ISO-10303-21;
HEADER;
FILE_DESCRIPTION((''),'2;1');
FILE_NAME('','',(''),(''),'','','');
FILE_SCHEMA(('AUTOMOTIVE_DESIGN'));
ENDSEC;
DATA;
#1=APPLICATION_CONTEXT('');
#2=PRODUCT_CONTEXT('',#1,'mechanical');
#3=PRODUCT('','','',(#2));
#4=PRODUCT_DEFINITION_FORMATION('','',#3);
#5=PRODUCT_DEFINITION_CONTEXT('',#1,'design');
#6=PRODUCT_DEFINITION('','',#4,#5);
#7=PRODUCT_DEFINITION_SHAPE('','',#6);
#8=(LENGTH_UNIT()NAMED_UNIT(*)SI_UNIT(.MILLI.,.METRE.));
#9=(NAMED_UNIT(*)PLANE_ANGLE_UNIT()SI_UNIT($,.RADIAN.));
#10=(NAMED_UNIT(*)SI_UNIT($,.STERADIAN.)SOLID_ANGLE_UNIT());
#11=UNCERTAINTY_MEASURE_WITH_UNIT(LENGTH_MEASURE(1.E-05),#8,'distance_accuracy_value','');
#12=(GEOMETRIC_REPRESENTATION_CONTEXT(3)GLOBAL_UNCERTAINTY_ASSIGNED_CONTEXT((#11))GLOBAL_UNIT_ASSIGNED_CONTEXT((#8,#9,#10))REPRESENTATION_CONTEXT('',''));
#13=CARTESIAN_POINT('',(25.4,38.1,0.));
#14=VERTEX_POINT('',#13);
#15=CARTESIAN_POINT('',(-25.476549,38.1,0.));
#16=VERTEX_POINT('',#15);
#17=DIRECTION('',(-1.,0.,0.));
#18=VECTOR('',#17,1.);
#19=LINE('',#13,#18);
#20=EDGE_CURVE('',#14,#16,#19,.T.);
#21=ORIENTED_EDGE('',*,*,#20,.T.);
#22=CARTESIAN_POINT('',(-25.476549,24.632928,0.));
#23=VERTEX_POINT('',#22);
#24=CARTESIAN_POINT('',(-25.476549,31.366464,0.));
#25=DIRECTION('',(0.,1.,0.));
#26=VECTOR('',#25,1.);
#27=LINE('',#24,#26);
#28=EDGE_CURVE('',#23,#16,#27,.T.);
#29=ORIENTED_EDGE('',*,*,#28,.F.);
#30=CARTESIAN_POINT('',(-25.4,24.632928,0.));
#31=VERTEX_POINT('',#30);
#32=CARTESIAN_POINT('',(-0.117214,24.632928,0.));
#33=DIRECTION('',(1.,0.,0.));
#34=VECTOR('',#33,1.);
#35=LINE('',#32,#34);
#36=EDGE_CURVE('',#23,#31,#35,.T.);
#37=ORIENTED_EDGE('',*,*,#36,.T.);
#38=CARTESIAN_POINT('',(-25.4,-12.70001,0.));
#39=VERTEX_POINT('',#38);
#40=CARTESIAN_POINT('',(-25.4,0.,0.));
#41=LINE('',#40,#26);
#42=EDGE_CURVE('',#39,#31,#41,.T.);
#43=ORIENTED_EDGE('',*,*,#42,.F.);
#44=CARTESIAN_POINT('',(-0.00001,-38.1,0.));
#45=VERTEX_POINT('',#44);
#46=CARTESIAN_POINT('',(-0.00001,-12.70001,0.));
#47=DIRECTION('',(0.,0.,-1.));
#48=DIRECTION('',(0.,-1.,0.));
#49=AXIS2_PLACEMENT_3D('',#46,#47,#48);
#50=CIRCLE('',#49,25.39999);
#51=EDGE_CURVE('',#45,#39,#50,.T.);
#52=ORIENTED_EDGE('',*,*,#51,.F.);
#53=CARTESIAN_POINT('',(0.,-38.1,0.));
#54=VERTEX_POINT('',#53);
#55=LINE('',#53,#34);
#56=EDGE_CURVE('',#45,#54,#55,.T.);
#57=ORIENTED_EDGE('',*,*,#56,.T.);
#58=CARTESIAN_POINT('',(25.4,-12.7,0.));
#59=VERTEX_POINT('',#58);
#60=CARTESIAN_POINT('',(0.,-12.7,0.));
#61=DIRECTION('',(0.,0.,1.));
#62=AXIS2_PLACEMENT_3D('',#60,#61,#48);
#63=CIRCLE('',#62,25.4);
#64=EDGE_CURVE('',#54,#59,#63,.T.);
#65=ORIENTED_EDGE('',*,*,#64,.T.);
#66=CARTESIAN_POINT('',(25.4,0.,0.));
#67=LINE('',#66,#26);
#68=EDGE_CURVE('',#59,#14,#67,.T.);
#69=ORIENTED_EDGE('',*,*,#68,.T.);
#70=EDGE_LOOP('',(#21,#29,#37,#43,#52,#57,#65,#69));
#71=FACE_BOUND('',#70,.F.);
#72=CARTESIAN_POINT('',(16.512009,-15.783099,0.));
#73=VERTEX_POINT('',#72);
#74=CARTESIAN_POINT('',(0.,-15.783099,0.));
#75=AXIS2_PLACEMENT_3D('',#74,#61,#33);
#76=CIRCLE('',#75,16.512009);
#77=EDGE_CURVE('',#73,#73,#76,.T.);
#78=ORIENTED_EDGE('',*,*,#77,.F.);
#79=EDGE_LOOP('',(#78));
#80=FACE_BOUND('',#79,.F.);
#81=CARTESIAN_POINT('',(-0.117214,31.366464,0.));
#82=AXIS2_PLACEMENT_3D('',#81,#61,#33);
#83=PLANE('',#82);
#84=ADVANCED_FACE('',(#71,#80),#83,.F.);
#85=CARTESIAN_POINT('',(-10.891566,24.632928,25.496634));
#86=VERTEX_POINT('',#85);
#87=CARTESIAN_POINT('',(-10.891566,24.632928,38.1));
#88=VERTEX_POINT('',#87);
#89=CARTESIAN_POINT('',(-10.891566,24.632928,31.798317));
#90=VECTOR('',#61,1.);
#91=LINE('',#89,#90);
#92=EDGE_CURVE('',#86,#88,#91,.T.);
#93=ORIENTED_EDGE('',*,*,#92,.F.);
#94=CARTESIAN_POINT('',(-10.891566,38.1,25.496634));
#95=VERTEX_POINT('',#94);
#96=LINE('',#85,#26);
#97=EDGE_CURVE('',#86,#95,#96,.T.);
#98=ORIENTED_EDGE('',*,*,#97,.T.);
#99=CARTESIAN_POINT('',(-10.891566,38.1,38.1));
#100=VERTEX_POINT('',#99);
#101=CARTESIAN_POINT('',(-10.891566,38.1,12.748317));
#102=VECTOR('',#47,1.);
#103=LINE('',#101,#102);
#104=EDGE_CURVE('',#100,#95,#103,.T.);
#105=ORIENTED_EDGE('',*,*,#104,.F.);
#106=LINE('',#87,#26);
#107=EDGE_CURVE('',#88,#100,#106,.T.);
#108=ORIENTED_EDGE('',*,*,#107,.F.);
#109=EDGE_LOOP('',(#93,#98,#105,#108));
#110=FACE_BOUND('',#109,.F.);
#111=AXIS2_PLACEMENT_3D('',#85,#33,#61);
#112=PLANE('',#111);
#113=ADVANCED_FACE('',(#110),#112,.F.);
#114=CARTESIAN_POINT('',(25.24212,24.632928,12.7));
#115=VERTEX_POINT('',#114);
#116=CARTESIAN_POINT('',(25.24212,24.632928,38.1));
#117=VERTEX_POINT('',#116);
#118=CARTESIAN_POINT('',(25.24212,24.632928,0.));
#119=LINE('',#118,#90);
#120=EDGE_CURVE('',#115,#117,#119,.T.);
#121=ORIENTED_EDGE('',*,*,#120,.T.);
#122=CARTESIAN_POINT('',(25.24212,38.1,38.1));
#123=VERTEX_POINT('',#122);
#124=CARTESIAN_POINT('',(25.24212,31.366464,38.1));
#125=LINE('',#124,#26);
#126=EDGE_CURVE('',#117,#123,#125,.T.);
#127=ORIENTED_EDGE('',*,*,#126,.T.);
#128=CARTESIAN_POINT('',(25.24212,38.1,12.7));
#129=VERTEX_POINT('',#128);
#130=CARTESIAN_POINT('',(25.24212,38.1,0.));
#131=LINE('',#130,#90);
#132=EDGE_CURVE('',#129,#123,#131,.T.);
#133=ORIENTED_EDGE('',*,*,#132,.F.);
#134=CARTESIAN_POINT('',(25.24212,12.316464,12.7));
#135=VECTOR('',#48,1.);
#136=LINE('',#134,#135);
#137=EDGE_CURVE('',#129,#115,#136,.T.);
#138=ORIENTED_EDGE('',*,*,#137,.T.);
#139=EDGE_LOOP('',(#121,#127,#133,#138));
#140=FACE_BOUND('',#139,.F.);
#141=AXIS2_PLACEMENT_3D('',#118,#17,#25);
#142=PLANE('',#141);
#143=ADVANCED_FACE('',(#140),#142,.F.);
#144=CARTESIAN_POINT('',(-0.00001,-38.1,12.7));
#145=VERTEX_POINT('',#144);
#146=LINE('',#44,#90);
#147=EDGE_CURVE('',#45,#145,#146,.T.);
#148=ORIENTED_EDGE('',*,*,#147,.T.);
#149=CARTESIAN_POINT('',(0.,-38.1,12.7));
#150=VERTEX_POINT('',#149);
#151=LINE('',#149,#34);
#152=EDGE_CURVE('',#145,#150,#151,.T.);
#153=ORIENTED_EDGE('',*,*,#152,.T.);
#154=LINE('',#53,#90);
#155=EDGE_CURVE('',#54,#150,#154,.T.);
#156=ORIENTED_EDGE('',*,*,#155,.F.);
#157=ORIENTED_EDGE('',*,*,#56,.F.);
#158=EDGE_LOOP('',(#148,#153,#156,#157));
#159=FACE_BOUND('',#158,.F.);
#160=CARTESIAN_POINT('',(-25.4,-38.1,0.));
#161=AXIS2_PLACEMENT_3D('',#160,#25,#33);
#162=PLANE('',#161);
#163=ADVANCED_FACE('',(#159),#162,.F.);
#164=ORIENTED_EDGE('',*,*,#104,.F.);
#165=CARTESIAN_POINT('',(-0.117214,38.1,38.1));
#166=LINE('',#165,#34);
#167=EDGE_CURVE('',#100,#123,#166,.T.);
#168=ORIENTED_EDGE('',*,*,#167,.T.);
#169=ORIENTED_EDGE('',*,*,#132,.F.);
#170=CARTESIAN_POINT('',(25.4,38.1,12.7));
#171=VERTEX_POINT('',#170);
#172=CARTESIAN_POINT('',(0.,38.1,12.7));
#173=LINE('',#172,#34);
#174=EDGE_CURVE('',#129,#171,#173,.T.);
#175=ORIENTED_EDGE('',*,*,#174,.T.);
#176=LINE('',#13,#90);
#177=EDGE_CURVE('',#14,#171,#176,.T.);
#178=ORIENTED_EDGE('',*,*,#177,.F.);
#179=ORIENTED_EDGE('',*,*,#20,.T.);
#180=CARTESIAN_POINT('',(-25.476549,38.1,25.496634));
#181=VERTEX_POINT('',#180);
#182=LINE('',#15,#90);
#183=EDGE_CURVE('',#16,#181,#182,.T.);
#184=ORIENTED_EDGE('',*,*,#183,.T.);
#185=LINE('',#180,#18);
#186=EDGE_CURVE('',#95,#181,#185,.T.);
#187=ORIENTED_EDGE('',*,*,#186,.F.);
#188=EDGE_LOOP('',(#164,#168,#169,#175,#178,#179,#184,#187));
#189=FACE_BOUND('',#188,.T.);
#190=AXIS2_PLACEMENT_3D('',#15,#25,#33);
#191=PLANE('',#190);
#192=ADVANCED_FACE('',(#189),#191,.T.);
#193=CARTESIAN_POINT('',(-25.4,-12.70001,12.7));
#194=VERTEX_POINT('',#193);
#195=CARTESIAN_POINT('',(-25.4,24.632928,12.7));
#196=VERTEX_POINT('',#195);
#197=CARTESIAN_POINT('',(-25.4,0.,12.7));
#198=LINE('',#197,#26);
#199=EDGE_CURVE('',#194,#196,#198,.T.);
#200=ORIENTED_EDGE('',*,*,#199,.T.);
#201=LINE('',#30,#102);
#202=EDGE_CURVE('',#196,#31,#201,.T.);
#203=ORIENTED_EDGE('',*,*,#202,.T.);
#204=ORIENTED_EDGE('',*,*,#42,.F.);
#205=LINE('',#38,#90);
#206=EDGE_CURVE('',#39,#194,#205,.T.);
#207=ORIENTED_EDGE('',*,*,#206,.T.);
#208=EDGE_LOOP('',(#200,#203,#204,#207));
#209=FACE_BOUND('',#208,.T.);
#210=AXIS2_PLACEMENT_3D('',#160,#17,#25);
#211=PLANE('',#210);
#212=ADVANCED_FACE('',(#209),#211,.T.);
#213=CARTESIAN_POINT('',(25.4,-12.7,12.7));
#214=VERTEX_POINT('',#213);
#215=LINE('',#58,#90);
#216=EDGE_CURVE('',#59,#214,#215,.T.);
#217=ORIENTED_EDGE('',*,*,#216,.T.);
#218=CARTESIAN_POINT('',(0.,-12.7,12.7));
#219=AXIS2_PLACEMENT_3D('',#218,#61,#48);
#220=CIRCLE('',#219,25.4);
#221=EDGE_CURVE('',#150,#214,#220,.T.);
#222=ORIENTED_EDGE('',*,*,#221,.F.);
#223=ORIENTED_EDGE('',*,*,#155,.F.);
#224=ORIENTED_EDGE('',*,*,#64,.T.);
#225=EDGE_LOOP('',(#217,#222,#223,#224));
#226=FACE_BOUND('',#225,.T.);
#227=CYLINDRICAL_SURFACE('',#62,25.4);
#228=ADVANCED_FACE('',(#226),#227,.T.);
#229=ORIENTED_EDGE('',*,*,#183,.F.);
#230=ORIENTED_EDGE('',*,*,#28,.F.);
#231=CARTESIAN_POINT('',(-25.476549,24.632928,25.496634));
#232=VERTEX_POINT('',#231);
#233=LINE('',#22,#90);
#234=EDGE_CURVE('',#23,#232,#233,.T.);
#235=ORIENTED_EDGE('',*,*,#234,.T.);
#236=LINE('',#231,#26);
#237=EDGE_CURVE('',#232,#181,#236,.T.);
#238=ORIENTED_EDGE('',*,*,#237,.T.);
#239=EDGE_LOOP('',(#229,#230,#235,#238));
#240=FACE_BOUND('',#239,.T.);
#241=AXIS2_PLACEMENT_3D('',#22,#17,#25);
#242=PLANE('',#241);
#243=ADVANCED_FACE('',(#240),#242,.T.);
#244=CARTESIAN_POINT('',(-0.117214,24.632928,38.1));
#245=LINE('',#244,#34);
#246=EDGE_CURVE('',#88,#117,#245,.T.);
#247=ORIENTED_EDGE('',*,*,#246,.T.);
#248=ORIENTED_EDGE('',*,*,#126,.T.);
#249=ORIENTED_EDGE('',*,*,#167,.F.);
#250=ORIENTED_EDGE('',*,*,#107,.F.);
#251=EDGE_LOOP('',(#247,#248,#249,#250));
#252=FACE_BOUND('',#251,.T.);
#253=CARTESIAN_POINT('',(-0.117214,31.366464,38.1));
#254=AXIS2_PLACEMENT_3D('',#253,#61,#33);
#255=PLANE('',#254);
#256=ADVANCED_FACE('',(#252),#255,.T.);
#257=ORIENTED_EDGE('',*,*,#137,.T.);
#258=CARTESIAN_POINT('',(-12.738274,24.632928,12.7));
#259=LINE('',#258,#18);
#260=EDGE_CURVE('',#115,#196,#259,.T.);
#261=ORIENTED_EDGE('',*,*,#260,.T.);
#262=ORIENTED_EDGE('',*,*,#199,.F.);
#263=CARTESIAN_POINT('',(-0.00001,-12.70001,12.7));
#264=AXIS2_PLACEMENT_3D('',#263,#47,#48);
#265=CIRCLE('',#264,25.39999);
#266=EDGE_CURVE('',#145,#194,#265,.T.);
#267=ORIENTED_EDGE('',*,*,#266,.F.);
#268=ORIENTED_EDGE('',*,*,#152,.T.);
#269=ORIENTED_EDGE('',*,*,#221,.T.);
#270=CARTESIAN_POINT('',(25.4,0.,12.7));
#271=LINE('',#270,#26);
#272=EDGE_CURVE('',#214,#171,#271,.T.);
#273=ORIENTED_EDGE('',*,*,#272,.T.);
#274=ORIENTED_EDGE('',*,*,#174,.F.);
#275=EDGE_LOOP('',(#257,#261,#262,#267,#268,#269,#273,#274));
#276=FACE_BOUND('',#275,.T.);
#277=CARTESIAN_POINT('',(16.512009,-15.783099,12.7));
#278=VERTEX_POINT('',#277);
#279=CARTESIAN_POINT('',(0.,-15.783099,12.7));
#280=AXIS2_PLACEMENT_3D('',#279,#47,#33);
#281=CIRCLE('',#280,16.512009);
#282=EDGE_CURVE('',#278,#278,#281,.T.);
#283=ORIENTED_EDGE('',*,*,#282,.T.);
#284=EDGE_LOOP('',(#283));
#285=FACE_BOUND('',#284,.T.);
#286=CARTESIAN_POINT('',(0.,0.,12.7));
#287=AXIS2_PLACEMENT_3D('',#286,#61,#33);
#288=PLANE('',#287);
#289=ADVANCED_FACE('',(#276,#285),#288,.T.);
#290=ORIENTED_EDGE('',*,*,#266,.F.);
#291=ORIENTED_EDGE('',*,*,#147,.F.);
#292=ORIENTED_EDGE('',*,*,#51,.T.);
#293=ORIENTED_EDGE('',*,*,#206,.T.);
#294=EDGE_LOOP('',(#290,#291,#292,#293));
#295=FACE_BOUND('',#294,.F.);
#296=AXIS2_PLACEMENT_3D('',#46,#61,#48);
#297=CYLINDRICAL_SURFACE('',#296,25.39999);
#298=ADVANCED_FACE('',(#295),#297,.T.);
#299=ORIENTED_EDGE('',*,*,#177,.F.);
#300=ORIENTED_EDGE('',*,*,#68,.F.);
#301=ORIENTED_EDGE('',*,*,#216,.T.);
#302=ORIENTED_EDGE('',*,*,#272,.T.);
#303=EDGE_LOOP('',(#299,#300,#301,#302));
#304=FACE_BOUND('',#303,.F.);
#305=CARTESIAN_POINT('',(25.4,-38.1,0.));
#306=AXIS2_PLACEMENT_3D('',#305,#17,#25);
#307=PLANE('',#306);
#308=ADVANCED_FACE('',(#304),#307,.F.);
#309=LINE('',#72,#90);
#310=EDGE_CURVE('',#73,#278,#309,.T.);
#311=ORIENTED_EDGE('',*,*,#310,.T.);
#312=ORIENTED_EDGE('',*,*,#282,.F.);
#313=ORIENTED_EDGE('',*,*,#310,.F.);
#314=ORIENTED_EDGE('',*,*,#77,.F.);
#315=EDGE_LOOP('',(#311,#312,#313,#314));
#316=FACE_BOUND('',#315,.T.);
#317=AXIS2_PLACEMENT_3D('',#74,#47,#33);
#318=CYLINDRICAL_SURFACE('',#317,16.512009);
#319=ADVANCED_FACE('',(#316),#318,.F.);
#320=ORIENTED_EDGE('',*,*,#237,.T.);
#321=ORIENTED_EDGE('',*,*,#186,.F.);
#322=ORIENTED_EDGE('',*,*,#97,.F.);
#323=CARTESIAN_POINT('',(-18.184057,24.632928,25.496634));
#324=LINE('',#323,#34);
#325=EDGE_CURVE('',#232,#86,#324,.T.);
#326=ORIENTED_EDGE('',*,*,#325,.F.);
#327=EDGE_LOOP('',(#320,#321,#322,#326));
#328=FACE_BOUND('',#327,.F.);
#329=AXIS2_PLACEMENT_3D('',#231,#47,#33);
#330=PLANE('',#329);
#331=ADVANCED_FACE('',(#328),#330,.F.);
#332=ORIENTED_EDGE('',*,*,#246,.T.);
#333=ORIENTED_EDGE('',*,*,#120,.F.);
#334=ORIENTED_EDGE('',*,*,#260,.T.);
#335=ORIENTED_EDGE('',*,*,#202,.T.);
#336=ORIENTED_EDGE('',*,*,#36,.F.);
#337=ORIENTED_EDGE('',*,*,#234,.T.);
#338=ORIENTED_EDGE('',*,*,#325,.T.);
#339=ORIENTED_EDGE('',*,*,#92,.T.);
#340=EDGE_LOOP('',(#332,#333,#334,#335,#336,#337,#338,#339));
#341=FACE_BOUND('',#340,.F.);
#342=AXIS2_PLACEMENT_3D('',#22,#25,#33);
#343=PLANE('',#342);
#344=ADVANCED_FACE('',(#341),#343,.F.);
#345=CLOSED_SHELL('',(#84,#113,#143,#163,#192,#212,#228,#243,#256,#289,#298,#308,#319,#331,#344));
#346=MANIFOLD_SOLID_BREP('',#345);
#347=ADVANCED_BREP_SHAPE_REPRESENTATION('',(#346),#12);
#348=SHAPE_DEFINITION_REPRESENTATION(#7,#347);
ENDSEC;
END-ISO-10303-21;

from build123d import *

# Parameters (mm, degrees)
F0_W     = 50.8
F0_H     = 76.2
F1_DEPTH = 12.7
F2_R     = 25.4
F3_R     = 25.39999
F4_W     = 50.7186688483
F4_H     = 13.4670715779
F5_DEPTH = 38.1
F6_W     = 14.5849827677
F6_H     = 12.6033662766
F7_DEPTH = 13.4680715779
F8_R     = 16.5120085349
F9_DEPTH = 38.101


# Not quite as in the source:
# - a fillet or chamfer is up to 0.001 mm smaller than in the source, because OpenCascade refuses the exact size


with BuildPart() as f1:
    # F0 (on Top) → F1 (new body)
    with BuildSketch(Plane.XY):
        Rectangle(F0_W, F0_H)
    extrude(amount=F1_DEPTH)

    # F2
    f2_edges = [f1.edges().sort_by_distance(p)[0] for p in [
        (25.4, -38.1, 6.35),
    ]]
    fillet(f2_edges, radius=F2_R)

    # F3 (radius 25.4 in the source; OpenCascade refuses exactly that, so slightly less here)
    f3_edges = [f1.edges().sort_by_distance(p)[0] for p in [
        (-25.4, -38.1, 6.35),
    ]]
    fillet(f3_edges, radius=F3_R)

    # F4 (on Top) → F5 (join)
    with BuildSketch(Plane.XY):
        with Locations((-0.1172143966, 31.366464211)):
            Rectangle(F4_W, F4_H)
    extrude(amount=F5_DEPTH)

    # F6 (on face) → F7 (cut, through all)
    with BuildSketch(Plane.XZ.offset(-24.6329284221)):
        with Locations((-18.1840574369, 31.7983168617)):
            Rectangle(F6_W, F6_H)
    extrude(amount=-F7_DEPTH, mode=Mode.SUBTRACT)

    # F8 (on Top) → F9 (cut, through all)
    with BuildSketch(Plane.XY):
        with Locations((0, -15.7830994576)):
            Circle(F8_R)
    extrude(amount=F9_DEPTH, mode=Mode.SUBTRACT)


solid = f1.part
